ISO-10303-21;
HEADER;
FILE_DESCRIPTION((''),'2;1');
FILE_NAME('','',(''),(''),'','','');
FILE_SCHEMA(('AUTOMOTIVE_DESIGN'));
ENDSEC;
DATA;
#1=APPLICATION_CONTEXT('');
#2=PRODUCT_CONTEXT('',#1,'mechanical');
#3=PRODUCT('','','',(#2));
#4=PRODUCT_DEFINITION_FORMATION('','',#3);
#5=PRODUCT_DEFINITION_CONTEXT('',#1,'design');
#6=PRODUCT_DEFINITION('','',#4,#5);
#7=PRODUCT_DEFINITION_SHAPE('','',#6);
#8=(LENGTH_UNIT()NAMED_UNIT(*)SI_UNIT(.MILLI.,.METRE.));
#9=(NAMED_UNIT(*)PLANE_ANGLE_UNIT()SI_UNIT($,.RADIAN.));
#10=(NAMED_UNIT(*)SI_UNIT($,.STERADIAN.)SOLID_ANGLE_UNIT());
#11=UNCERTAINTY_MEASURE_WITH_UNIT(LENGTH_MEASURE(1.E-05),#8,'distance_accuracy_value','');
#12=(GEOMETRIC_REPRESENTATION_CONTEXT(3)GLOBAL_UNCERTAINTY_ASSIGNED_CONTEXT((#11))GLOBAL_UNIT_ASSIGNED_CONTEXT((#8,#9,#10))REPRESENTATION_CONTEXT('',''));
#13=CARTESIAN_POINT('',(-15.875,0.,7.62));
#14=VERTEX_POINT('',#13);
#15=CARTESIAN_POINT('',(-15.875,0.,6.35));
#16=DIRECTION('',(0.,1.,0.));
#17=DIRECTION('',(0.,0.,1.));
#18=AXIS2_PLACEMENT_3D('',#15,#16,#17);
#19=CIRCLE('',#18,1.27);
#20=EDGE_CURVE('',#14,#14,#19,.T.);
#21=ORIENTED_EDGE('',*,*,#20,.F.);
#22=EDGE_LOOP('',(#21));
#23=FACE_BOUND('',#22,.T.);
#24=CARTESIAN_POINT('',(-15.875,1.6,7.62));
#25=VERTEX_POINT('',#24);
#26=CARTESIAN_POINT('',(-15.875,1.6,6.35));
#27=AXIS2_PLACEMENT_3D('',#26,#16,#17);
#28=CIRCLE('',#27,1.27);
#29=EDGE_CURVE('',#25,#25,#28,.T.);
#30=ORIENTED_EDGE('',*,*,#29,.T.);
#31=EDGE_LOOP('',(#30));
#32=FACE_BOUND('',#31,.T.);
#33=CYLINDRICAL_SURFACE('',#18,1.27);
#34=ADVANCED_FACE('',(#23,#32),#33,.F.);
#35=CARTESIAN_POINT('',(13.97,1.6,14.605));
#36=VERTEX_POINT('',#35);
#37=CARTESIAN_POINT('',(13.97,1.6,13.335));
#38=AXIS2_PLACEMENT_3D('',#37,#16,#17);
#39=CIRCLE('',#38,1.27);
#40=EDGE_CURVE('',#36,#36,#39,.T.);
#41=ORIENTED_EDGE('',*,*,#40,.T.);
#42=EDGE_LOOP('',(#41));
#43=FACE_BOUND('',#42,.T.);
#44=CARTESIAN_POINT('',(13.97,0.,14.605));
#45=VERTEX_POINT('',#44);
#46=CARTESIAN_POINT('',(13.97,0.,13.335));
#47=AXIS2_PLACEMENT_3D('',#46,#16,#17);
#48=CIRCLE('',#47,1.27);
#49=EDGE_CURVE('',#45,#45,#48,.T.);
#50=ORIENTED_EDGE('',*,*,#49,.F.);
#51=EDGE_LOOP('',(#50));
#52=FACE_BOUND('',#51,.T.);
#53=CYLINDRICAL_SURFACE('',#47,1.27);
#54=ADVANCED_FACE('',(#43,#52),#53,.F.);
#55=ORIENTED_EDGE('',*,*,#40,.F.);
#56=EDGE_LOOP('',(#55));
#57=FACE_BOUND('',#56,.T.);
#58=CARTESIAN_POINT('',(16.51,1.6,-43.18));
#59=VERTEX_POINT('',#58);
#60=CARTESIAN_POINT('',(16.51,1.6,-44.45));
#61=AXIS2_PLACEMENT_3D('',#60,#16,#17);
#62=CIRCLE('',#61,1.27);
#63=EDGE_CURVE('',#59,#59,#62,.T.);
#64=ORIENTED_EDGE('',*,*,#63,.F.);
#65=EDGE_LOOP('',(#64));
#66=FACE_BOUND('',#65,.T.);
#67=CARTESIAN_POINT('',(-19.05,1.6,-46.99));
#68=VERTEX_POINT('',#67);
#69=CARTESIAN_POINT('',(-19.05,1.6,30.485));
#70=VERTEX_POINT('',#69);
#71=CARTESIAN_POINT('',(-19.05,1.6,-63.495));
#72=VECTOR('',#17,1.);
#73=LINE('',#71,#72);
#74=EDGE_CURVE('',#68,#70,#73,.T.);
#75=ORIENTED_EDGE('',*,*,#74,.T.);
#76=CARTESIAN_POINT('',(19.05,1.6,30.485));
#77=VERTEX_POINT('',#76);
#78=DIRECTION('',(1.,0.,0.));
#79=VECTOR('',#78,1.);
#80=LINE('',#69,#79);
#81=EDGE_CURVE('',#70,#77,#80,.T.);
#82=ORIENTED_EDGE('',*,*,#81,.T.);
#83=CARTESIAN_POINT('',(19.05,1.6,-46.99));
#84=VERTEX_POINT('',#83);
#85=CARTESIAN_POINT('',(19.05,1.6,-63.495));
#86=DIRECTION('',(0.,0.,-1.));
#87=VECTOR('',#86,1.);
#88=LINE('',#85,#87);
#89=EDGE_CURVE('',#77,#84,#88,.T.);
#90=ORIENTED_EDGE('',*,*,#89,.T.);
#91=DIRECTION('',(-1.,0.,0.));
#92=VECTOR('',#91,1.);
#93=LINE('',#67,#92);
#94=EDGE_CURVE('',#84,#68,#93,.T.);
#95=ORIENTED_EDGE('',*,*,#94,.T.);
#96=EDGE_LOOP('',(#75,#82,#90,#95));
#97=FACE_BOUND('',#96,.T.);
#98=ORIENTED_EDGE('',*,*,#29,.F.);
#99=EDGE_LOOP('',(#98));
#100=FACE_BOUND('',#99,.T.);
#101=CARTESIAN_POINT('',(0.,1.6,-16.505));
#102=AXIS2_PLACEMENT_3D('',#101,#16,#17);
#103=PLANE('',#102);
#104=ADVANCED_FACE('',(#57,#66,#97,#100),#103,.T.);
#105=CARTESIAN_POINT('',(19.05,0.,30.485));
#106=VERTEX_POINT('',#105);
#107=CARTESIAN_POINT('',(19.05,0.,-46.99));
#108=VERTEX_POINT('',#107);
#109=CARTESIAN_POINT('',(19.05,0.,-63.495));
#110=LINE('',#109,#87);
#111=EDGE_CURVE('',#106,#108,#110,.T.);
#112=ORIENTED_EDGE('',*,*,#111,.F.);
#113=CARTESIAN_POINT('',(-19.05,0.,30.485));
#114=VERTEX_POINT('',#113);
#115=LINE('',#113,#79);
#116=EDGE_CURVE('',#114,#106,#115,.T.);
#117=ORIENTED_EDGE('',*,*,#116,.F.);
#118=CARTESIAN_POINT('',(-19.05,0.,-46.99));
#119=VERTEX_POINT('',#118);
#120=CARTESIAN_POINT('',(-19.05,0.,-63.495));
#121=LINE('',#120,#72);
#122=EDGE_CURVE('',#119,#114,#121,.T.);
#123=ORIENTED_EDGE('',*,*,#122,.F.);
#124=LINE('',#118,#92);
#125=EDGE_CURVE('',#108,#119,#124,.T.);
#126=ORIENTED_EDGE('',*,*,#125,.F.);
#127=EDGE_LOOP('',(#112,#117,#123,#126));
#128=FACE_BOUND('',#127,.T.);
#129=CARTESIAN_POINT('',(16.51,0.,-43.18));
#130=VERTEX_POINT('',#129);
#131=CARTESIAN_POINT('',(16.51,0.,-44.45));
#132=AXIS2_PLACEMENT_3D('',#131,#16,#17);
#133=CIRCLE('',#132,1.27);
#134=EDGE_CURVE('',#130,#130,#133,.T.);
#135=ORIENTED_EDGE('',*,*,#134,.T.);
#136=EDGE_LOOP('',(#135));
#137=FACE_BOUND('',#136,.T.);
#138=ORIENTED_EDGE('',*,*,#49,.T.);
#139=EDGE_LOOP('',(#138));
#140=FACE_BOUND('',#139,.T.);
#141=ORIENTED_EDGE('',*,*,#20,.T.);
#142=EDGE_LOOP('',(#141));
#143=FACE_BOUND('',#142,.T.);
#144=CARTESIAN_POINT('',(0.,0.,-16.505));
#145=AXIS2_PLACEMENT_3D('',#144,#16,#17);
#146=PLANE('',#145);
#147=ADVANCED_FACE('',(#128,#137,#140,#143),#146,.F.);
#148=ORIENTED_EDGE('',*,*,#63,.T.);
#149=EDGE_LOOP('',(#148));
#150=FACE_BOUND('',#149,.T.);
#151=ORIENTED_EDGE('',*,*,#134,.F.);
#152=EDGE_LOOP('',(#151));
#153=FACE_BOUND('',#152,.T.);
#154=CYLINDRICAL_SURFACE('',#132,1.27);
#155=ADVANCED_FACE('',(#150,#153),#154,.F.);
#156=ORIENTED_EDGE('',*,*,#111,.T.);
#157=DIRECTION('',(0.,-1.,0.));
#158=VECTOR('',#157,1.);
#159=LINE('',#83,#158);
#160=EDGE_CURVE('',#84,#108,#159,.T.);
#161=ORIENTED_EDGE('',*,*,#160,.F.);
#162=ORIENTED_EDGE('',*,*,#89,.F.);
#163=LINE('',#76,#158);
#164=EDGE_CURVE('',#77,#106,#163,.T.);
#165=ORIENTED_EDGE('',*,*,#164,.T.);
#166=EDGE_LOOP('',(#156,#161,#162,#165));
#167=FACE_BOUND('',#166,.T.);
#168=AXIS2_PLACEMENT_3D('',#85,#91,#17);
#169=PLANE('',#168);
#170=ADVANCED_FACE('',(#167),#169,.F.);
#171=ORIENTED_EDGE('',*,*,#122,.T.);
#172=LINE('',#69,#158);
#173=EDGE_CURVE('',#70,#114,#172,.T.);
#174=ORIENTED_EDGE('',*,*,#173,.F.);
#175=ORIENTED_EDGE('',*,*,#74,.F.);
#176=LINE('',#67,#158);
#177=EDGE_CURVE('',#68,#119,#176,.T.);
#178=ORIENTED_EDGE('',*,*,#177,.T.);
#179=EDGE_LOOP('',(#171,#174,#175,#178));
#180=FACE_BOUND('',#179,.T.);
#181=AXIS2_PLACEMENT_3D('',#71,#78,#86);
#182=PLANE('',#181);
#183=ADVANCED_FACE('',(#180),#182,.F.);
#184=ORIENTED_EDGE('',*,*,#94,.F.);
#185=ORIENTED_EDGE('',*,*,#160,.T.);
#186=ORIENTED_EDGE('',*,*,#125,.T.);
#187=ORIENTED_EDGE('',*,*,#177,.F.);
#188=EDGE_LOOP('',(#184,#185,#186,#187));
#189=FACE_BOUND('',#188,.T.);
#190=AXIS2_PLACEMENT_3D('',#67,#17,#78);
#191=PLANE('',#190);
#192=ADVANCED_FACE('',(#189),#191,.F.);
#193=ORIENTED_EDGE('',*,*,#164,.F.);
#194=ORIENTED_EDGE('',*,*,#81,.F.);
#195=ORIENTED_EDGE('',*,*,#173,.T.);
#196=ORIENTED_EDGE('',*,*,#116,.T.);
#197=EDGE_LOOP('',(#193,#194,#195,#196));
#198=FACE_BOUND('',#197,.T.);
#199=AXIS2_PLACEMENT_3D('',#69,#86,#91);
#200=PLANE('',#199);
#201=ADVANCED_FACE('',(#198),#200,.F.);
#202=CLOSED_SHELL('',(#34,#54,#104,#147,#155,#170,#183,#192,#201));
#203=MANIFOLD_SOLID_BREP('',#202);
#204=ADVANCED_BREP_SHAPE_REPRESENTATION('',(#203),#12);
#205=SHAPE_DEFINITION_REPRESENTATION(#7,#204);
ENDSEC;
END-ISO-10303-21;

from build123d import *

# Parameters (mm, degrees)
SKETCH1_W                   = 38.1
SKETCH1_H                   = 93.98
BOSS_EXTRUDE1_DEPTH         = 1.6
CUT_EXTRUDE1_DEPTH          = 51.729898482
CUT_EXTRUDE1_DEPTH_BACK     = 51.729898482
SKETCH2_R                   = 1.27
CUT_EXTRUDE2_DEPTH          = 51.729898482
CUT_EXTRUDE2_DEPTH_BACK     = 51.729898482
SKETCH3_R                   = 1.27
SKETCH3_W                   = 38.1
SKETCH3_H                   = 16.505
BODY_MOVE_COPY1_DEPTH       = 1.6
BODY_MOVE_COPY1_2_OUTLINE_W = 38.1
BODY_MOVE_COPY1_2_OUTLINE_H = 16.505
BODY_MOVE_COPY1_2_OUTLINE_R = 1.27
BODY_MOVE_COPY1_2_DEPTH     = 1.6


# Read off the part's stored shape, not the designer's step: Body-Move/Copy1
with BuildPart() as part:
    # Sketch1 → Boss-Extrude1 (new body)
    with BuildSketch(Plane(origin=(0, 0, 0), x_dir=(1, 0, 0), z_dir=(0, 1, 0))):
        Rectangle(SKETCH1_W, SKETCH1_H)
    extrude(amount=BOSS_EXTRUDE1_DEPTH)

    # Sketch2 → Cut-Extrude1 (cut, two sides: drawn at the far end of the back side and taken through both)
    with BuildSketch(Plane(origin=(0, 1.6, 0), x_dir=(1, 0, 0), z_dir=(0, 1, 0)).offset(-CUT_EXTRUDE1_DEPTH_BACK)):
        with Locations(Location((13.97, -29.84, 0), (0, 0, 270))):
            Circle(SKETCH2_R)
        with Locations(Location((-15.875, -6.35, 0), (0, 0, 270))):
            Circle(SKETCH2_R)
        with Locations(Location((16.51, 44.45, 0), (0, 0, 270))):
            Circle(SKETCH2_R)
    extrude(amount=CUT_EXTRUDE1_DEPTH + CUT_EXTRUDE1_DEPTH_BACK, mode=Mode.SUBTRACT)

    # Sketch3 → Cut-Extrude2 (cut, two sides: drawn at the far end of the back side and taken through both)
    with BuildSketch(Plane(origin=(0, 1.6, 0), x_dir=(1, 0, 0), z_dir=(0, 1, 0)).offset(-CUT_EXTRUDE2_DEPTH_BACK)):
        with Locations(Location((-15.875, -6.35, 0), (0, 0, 270))):
            Circle(SKETCH3_R)
        with Locations((0, -18.5875)):
            Rectangle(SKETCH3_W, SKETCH3_H)
    extrude(amount=CUT_EXTRUDE2_DEPTH + CUT_EXTRUDE2_DEPTH_BACK, mode=Mode.SUBTRACT)


with BuildPart() as cut_extrude2_piece_1:
    # of the separate pieces the step leaves, piece 1, a body of its own (cut_extrude2_pieces)
    add(part.part.solids().sort_by_distance((-19.05, 0, -46.99))[0])


with BuildPart() as cut_extrude2_piece_2:
    # of the separate pieces the step leaves, piece 2, a body of its own (cut_extrude2_pieces)
    add(part.part.solids().sort_by_distance((-19.05, 0, 46.99))[0])

    # Body-Move/Copy1 outline → Body-Move/Copy1 (cut)
    with BuildSketch(Plane(origin=(0, 0, 0), x_dir=(1, 0, 0), z_dir=(0, 1, 0))):
        with BuildLine():
            Line((12.875982176, -30.485), (-19.05, -30.485))
            Line((-19.05, -30.485), (-19.05, -46.99))
            Line((-19.05, -46.99), (19.05, -46.99))
            Line((19.05, -46.99), (19.05, -30.485))
            Line((19.05, -30.485), (15.064017824, -30.485))
            ThreePointArc((15.064017824, -30.485), (13.97, -31.11), (12.875982176, -30.485))
        make_face()
    extrude(amount=BODY_MOVE_COPY1_DEPTH, mode=Mode.SUBTRACT)

    # Body-Move_Copy1 2 outline → Body-Move_Copy1 2 (add)
    # profile 1 of 2: a face of its own
    with BuildSketch(Plane(origin=(0, 0, 0), x_dir=(1, 0, 0), z_dir=(0, 1, 0))):
        with Locations((0, -18.5875)):
            Rectangle(BODY_MOVE_COPY1_2_OUTLINE_W, BODY_MOVE_COPY1_2_OUTLINE_H)
        with Locations((13.97, -13.335)):
            Circle(BODY_MOVE_COPY1_2_OUTLINE_R, mode=Mode.SUBTRACT)
    # profile 2 of 2: a face of its own
    with BuildSketch(Plane(origin=(0, 0, 0), x_dir=(1, 0, 0), z_dir=(0, 1, 0))):
        with BuildLine():
            ThreePointArc((15.064017824, -30.485), (13.97, -28.57), (12.875982176, -30.485))
            Line((12.875982176, -30.485), (15.064017824, -30.485))
        make_face()
    extrude(amount=BODY_MOVE_COPY1_2_DEPTH)

    # Combine1: union Cut-Extrude2 piece 1
    add(cut_extrude2_piece_1.part)


solid = cut_extrude2_piece_2.part
